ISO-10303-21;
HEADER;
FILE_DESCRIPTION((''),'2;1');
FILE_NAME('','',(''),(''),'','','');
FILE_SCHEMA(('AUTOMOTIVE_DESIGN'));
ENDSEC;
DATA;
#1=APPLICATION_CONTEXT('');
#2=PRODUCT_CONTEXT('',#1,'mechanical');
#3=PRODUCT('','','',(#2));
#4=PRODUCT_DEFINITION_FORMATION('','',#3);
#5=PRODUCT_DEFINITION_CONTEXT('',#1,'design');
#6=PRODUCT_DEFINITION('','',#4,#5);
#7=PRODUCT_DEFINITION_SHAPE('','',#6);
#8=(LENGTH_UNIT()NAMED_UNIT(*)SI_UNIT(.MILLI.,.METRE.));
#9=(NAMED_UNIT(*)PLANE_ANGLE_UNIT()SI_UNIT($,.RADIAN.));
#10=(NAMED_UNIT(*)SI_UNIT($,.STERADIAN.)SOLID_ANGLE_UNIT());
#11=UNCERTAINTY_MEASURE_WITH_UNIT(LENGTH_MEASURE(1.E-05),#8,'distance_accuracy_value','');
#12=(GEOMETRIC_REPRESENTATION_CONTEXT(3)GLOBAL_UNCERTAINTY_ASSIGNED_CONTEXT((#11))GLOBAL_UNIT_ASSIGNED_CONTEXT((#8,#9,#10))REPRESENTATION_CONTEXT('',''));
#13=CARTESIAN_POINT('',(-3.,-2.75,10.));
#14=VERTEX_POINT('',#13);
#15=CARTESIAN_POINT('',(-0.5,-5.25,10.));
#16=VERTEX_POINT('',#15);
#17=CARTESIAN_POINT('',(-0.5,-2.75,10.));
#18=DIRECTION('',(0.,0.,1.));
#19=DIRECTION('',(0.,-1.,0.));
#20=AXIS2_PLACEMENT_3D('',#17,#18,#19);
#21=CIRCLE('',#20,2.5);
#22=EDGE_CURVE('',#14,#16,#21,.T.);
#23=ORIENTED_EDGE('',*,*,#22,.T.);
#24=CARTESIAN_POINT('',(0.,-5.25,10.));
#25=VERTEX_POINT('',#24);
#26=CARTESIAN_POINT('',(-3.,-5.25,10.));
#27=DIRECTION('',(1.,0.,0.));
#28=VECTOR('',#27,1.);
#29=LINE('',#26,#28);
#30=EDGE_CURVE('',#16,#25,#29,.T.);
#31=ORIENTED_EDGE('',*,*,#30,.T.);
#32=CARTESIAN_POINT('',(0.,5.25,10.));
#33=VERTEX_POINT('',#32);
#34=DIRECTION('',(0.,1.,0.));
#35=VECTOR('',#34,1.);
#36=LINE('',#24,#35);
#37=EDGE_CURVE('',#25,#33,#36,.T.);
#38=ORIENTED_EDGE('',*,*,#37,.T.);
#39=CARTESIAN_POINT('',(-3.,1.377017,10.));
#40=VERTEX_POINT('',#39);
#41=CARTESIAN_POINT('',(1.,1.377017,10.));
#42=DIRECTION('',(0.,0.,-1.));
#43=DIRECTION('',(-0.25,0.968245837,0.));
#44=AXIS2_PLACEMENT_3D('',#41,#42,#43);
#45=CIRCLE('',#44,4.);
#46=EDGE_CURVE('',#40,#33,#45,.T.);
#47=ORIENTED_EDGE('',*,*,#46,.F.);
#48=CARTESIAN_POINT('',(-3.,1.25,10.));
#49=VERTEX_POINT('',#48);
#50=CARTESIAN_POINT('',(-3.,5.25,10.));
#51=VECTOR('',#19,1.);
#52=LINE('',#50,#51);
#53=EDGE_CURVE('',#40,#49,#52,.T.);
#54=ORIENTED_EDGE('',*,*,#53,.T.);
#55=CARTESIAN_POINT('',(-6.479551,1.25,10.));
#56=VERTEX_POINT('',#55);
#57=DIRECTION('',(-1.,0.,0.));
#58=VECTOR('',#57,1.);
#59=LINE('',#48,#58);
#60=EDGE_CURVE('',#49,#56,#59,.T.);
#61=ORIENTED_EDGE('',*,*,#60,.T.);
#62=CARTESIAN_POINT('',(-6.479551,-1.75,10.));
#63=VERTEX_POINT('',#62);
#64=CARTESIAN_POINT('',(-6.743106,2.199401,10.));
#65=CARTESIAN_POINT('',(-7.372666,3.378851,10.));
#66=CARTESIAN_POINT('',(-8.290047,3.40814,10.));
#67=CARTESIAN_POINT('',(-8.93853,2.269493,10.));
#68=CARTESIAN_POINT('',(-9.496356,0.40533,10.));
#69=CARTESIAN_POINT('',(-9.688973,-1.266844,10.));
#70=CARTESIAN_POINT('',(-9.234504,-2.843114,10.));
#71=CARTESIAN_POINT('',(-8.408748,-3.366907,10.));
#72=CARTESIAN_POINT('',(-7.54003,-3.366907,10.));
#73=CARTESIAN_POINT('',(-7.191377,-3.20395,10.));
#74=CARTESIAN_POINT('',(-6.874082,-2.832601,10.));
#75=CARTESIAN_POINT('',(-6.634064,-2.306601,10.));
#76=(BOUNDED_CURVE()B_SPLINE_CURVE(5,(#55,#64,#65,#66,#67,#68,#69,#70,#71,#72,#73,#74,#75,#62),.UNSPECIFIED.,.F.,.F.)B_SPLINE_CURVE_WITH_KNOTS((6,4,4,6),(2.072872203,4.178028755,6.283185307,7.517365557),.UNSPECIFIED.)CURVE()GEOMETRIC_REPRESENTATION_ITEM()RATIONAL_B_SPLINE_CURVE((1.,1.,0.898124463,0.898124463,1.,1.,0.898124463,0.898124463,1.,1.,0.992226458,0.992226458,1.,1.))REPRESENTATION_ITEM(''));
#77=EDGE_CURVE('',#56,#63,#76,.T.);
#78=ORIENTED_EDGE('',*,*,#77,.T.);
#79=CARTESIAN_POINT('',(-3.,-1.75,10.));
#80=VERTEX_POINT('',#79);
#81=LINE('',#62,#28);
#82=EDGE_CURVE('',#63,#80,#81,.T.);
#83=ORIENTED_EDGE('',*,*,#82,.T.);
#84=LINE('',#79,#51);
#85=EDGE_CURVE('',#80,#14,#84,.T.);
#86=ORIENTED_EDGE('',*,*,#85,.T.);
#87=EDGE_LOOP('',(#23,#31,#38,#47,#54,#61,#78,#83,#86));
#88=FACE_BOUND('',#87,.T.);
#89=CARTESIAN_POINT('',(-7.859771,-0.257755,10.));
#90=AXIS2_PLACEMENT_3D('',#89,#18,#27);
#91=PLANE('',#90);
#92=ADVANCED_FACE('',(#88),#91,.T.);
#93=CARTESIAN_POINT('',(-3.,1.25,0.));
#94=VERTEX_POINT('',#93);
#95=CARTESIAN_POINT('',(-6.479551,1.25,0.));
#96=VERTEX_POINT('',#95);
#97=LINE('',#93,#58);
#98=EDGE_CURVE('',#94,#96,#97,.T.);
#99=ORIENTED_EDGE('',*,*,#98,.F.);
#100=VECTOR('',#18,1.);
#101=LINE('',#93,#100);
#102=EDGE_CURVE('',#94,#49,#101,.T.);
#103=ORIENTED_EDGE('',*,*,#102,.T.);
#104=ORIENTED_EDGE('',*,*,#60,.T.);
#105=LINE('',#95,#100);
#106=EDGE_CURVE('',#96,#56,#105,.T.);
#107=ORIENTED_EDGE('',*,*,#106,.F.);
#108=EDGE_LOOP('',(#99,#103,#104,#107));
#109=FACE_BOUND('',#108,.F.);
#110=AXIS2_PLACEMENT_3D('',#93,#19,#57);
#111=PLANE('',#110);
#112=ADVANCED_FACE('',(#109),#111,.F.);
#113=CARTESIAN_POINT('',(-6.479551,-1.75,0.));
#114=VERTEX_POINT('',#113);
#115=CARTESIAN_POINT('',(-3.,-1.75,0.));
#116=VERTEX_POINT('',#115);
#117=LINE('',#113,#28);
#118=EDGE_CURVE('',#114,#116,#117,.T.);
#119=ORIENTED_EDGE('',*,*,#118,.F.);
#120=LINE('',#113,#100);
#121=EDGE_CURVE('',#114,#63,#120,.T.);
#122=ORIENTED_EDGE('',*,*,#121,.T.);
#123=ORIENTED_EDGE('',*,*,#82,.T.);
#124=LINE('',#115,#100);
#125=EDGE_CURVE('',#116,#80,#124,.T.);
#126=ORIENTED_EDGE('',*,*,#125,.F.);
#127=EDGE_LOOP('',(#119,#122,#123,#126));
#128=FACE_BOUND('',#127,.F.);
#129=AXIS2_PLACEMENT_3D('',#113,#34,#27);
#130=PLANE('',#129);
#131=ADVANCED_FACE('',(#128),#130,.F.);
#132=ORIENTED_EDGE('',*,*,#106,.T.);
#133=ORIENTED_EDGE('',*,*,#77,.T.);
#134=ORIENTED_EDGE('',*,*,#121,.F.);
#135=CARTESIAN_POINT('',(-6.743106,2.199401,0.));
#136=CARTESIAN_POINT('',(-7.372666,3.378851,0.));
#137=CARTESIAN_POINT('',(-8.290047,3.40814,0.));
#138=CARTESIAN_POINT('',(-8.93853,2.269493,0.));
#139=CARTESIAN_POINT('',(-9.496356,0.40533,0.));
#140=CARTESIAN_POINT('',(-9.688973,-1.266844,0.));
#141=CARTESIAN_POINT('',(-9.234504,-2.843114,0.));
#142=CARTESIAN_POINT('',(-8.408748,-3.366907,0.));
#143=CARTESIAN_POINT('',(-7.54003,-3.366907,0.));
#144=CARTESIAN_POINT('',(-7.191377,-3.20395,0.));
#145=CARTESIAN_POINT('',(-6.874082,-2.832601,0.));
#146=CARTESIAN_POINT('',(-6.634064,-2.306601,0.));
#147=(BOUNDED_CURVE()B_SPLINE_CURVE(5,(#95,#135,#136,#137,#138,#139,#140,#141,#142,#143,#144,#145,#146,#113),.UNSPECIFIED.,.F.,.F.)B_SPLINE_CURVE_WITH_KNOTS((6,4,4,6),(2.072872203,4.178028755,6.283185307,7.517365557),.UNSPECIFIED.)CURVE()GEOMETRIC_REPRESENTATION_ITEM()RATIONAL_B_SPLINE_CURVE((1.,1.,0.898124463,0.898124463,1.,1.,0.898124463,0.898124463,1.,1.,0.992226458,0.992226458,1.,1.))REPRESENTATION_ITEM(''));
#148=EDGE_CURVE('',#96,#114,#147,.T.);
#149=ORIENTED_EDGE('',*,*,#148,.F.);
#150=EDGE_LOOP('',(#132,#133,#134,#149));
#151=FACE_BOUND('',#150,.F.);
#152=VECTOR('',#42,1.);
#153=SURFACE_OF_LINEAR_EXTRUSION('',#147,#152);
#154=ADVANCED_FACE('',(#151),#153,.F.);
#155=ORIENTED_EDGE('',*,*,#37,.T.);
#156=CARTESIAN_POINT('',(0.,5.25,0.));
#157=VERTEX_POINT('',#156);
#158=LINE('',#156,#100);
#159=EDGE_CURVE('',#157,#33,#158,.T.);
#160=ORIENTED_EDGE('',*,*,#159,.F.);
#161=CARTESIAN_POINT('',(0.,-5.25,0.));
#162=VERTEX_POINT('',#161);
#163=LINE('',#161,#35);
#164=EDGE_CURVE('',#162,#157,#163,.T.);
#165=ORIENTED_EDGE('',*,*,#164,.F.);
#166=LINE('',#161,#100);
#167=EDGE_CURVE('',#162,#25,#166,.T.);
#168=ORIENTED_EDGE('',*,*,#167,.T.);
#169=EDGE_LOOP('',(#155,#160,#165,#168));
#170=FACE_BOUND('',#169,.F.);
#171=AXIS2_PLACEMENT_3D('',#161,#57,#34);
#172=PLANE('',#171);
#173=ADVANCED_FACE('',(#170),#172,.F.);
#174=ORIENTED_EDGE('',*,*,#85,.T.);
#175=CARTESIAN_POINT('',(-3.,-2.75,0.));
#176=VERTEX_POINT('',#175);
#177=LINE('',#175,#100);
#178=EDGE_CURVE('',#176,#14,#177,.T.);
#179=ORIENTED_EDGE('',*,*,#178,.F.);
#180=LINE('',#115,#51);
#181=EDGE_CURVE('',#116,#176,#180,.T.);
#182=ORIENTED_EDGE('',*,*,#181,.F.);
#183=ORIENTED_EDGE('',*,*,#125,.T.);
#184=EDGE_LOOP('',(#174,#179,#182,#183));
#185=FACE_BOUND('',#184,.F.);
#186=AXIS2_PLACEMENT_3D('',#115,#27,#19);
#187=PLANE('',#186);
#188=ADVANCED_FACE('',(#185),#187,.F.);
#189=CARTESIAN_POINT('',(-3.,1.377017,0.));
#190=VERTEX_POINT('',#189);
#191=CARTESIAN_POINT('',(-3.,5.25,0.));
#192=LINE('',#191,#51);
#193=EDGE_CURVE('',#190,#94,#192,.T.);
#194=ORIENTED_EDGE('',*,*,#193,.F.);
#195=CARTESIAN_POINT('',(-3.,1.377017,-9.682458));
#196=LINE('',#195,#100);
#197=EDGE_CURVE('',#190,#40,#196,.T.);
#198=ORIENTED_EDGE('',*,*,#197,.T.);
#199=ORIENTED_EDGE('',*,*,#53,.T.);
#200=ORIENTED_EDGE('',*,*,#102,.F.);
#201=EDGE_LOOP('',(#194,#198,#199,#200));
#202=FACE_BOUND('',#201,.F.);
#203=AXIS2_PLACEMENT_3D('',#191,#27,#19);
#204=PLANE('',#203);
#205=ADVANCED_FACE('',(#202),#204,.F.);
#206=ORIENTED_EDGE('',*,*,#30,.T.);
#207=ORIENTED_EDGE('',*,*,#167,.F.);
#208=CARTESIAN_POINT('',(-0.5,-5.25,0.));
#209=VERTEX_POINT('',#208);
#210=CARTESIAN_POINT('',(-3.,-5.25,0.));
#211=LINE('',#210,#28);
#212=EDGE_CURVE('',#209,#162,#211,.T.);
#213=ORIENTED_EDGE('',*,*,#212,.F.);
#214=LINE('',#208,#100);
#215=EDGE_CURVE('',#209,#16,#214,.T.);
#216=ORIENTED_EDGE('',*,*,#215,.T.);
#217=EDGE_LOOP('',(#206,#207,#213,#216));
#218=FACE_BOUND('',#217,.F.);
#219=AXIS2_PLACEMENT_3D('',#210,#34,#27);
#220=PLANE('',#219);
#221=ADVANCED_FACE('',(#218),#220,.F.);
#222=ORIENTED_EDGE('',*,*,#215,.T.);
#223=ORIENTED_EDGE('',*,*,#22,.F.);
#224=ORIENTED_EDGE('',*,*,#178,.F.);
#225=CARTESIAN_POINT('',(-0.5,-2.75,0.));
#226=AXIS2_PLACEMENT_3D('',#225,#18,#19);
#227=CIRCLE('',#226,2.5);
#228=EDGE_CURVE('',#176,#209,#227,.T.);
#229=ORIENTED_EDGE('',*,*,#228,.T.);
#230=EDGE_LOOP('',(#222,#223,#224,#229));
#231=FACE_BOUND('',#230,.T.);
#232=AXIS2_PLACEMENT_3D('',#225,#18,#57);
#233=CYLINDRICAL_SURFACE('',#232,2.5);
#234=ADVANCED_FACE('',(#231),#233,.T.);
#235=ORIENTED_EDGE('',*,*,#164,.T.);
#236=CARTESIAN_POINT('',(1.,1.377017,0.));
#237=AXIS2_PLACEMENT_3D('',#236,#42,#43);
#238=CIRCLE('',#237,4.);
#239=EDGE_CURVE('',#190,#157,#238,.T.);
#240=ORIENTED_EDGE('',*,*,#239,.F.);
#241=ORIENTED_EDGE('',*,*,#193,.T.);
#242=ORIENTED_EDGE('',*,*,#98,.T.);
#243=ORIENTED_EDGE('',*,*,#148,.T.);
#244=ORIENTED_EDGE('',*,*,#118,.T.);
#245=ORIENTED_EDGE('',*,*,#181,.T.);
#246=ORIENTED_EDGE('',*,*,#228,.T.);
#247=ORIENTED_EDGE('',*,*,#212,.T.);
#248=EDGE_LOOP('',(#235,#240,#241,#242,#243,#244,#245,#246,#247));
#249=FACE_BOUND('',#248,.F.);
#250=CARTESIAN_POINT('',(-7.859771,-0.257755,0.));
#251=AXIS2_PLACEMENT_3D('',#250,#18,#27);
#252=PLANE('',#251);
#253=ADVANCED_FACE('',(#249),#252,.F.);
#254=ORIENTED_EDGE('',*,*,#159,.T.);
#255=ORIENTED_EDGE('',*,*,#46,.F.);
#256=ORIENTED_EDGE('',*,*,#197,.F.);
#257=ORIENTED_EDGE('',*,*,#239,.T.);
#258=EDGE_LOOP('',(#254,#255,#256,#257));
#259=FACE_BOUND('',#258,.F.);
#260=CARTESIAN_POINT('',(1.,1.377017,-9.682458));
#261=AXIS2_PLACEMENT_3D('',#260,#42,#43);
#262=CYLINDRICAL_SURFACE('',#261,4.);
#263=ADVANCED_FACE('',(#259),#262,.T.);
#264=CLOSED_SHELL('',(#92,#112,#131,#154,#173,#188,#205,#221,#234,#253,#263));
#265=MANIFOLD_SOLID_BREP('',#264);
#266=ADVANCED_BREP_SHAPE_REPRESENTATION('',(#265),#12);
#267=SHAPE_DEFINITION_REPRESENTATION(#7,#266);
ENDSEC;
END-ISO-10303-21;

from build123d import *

# Parameters (mm, degrees)
F1_DEPTH    = 10
F2_DEPTH    = 10
F3_T1_DEPTH = 29.364916731
F4_R        = 2.5


# Not quite as in the source:
# - a fillet or chamfer that OpenCascade refuses, or shapes differently, is made with other operations: its cross-section is extruded or revolved along the edge and cut away or added


with BuildPart() as f1:
    # F0 (on Top) → F1 (new body)
    with BuildSketch(Plane.XY):
        with BuildLine():
            Line((0, -5.25), (0, 0))
            Line((0, 0), (0, 5.25))
            Line((0, 5.25), (-3, 5.25))
            Line((-3, 5.25), (-3, 1.25))
            Line((-3, 1.25), (-6.479551384, 1.25))
            add(Edge.make_bspline(
                [(-6.479551384, -1.75), (-6.0631503018, -0.25), (-6.479551384, 1.25)],
                knots=[1.0687204508, 1.0687204508, 1.0687204508, 2.0728722028, 2.0728722028, 2.0728722028], degree=2, weights=[1, 0.8765854438, 1]))
            Line((-6.479551384, -1.75), (-3, -1.75))
            Line((-3, -1.75), (-3, -5.25))
            Line((-3, -5.25), (0, -5.25))
        make_face()
    extrude(amount=F1_DEPTH)

    # F0 (on Top) → F2 (join)
    with BuildSketch(Plane.XY):
        with BuildLine():
            add(Edge.make_bspline(
                [(-6.479551384, -1.75), (-6.0631503018, -0.25), (-6.479551384, 1.25)],
                knots=[1.0687204508, 1.0687204508, 1.0687204508, 2.0728722028, 2.0728722028, 2.0728722028], degree=2, weights=[1, 0.8765854438, 1]))
            add(Edge.make_bspline(
                [(-6.479551384, 1.25), (-7.8097391813, 6.0417303318), (-9.2174427731, 1.3374114859), (-10.6251463649, -3.36690736), (-7.8610982746, -3.36690736)],
                knots=[2.0728722028, 2.0728722028, 2.0728722028, 4.178028755, 4.178028755, 6.2831853072, 6.2831853072, 6.2831853072], degree=2, weights=[1, 0.49533294, 1, 0.49533294, 1]))
            add(Edge.make_bspline(
                [(-7.8610982746, -3.36690736), (-6.9284060337, -3.36690736), (-6.479551384, -1.75)],
                knots=[0, 0, 0, 1.0687204508, 1.0687204508, 1.0687204508], degree=2, weights=[1, 0.8605946365, 1]))
        make_face()
    extrude(amount=F2_DEPTH)

    # F3: fillet of radius 4 on 1 edges, made by hand

    # F3_s2 → F3_t1 (cut)
    with BuildSketch(Plane.XY.offset(-9.6824583655)):
        with BuildLine():
            ThreePointArc((0, 5.25), (-2.1622776602, 3.8265063966), (-3, 1.3770166538))
            Line((-3, 1.3770166538), (-3, 5.25))
            Line((-3, 5.25), (0, 5.25))
        make_face()
    extrude(amount=F3_T1_DEPTH, mode=Mode.SUBTRACT)

    # F4
    f4_edges = [f1.edges().sort_by_distance(p)[0] for p in [
        (-3, -5.25, 5),
    ]]
    fillet(f4_edges, radius=F4_R)


solid = f1.part
